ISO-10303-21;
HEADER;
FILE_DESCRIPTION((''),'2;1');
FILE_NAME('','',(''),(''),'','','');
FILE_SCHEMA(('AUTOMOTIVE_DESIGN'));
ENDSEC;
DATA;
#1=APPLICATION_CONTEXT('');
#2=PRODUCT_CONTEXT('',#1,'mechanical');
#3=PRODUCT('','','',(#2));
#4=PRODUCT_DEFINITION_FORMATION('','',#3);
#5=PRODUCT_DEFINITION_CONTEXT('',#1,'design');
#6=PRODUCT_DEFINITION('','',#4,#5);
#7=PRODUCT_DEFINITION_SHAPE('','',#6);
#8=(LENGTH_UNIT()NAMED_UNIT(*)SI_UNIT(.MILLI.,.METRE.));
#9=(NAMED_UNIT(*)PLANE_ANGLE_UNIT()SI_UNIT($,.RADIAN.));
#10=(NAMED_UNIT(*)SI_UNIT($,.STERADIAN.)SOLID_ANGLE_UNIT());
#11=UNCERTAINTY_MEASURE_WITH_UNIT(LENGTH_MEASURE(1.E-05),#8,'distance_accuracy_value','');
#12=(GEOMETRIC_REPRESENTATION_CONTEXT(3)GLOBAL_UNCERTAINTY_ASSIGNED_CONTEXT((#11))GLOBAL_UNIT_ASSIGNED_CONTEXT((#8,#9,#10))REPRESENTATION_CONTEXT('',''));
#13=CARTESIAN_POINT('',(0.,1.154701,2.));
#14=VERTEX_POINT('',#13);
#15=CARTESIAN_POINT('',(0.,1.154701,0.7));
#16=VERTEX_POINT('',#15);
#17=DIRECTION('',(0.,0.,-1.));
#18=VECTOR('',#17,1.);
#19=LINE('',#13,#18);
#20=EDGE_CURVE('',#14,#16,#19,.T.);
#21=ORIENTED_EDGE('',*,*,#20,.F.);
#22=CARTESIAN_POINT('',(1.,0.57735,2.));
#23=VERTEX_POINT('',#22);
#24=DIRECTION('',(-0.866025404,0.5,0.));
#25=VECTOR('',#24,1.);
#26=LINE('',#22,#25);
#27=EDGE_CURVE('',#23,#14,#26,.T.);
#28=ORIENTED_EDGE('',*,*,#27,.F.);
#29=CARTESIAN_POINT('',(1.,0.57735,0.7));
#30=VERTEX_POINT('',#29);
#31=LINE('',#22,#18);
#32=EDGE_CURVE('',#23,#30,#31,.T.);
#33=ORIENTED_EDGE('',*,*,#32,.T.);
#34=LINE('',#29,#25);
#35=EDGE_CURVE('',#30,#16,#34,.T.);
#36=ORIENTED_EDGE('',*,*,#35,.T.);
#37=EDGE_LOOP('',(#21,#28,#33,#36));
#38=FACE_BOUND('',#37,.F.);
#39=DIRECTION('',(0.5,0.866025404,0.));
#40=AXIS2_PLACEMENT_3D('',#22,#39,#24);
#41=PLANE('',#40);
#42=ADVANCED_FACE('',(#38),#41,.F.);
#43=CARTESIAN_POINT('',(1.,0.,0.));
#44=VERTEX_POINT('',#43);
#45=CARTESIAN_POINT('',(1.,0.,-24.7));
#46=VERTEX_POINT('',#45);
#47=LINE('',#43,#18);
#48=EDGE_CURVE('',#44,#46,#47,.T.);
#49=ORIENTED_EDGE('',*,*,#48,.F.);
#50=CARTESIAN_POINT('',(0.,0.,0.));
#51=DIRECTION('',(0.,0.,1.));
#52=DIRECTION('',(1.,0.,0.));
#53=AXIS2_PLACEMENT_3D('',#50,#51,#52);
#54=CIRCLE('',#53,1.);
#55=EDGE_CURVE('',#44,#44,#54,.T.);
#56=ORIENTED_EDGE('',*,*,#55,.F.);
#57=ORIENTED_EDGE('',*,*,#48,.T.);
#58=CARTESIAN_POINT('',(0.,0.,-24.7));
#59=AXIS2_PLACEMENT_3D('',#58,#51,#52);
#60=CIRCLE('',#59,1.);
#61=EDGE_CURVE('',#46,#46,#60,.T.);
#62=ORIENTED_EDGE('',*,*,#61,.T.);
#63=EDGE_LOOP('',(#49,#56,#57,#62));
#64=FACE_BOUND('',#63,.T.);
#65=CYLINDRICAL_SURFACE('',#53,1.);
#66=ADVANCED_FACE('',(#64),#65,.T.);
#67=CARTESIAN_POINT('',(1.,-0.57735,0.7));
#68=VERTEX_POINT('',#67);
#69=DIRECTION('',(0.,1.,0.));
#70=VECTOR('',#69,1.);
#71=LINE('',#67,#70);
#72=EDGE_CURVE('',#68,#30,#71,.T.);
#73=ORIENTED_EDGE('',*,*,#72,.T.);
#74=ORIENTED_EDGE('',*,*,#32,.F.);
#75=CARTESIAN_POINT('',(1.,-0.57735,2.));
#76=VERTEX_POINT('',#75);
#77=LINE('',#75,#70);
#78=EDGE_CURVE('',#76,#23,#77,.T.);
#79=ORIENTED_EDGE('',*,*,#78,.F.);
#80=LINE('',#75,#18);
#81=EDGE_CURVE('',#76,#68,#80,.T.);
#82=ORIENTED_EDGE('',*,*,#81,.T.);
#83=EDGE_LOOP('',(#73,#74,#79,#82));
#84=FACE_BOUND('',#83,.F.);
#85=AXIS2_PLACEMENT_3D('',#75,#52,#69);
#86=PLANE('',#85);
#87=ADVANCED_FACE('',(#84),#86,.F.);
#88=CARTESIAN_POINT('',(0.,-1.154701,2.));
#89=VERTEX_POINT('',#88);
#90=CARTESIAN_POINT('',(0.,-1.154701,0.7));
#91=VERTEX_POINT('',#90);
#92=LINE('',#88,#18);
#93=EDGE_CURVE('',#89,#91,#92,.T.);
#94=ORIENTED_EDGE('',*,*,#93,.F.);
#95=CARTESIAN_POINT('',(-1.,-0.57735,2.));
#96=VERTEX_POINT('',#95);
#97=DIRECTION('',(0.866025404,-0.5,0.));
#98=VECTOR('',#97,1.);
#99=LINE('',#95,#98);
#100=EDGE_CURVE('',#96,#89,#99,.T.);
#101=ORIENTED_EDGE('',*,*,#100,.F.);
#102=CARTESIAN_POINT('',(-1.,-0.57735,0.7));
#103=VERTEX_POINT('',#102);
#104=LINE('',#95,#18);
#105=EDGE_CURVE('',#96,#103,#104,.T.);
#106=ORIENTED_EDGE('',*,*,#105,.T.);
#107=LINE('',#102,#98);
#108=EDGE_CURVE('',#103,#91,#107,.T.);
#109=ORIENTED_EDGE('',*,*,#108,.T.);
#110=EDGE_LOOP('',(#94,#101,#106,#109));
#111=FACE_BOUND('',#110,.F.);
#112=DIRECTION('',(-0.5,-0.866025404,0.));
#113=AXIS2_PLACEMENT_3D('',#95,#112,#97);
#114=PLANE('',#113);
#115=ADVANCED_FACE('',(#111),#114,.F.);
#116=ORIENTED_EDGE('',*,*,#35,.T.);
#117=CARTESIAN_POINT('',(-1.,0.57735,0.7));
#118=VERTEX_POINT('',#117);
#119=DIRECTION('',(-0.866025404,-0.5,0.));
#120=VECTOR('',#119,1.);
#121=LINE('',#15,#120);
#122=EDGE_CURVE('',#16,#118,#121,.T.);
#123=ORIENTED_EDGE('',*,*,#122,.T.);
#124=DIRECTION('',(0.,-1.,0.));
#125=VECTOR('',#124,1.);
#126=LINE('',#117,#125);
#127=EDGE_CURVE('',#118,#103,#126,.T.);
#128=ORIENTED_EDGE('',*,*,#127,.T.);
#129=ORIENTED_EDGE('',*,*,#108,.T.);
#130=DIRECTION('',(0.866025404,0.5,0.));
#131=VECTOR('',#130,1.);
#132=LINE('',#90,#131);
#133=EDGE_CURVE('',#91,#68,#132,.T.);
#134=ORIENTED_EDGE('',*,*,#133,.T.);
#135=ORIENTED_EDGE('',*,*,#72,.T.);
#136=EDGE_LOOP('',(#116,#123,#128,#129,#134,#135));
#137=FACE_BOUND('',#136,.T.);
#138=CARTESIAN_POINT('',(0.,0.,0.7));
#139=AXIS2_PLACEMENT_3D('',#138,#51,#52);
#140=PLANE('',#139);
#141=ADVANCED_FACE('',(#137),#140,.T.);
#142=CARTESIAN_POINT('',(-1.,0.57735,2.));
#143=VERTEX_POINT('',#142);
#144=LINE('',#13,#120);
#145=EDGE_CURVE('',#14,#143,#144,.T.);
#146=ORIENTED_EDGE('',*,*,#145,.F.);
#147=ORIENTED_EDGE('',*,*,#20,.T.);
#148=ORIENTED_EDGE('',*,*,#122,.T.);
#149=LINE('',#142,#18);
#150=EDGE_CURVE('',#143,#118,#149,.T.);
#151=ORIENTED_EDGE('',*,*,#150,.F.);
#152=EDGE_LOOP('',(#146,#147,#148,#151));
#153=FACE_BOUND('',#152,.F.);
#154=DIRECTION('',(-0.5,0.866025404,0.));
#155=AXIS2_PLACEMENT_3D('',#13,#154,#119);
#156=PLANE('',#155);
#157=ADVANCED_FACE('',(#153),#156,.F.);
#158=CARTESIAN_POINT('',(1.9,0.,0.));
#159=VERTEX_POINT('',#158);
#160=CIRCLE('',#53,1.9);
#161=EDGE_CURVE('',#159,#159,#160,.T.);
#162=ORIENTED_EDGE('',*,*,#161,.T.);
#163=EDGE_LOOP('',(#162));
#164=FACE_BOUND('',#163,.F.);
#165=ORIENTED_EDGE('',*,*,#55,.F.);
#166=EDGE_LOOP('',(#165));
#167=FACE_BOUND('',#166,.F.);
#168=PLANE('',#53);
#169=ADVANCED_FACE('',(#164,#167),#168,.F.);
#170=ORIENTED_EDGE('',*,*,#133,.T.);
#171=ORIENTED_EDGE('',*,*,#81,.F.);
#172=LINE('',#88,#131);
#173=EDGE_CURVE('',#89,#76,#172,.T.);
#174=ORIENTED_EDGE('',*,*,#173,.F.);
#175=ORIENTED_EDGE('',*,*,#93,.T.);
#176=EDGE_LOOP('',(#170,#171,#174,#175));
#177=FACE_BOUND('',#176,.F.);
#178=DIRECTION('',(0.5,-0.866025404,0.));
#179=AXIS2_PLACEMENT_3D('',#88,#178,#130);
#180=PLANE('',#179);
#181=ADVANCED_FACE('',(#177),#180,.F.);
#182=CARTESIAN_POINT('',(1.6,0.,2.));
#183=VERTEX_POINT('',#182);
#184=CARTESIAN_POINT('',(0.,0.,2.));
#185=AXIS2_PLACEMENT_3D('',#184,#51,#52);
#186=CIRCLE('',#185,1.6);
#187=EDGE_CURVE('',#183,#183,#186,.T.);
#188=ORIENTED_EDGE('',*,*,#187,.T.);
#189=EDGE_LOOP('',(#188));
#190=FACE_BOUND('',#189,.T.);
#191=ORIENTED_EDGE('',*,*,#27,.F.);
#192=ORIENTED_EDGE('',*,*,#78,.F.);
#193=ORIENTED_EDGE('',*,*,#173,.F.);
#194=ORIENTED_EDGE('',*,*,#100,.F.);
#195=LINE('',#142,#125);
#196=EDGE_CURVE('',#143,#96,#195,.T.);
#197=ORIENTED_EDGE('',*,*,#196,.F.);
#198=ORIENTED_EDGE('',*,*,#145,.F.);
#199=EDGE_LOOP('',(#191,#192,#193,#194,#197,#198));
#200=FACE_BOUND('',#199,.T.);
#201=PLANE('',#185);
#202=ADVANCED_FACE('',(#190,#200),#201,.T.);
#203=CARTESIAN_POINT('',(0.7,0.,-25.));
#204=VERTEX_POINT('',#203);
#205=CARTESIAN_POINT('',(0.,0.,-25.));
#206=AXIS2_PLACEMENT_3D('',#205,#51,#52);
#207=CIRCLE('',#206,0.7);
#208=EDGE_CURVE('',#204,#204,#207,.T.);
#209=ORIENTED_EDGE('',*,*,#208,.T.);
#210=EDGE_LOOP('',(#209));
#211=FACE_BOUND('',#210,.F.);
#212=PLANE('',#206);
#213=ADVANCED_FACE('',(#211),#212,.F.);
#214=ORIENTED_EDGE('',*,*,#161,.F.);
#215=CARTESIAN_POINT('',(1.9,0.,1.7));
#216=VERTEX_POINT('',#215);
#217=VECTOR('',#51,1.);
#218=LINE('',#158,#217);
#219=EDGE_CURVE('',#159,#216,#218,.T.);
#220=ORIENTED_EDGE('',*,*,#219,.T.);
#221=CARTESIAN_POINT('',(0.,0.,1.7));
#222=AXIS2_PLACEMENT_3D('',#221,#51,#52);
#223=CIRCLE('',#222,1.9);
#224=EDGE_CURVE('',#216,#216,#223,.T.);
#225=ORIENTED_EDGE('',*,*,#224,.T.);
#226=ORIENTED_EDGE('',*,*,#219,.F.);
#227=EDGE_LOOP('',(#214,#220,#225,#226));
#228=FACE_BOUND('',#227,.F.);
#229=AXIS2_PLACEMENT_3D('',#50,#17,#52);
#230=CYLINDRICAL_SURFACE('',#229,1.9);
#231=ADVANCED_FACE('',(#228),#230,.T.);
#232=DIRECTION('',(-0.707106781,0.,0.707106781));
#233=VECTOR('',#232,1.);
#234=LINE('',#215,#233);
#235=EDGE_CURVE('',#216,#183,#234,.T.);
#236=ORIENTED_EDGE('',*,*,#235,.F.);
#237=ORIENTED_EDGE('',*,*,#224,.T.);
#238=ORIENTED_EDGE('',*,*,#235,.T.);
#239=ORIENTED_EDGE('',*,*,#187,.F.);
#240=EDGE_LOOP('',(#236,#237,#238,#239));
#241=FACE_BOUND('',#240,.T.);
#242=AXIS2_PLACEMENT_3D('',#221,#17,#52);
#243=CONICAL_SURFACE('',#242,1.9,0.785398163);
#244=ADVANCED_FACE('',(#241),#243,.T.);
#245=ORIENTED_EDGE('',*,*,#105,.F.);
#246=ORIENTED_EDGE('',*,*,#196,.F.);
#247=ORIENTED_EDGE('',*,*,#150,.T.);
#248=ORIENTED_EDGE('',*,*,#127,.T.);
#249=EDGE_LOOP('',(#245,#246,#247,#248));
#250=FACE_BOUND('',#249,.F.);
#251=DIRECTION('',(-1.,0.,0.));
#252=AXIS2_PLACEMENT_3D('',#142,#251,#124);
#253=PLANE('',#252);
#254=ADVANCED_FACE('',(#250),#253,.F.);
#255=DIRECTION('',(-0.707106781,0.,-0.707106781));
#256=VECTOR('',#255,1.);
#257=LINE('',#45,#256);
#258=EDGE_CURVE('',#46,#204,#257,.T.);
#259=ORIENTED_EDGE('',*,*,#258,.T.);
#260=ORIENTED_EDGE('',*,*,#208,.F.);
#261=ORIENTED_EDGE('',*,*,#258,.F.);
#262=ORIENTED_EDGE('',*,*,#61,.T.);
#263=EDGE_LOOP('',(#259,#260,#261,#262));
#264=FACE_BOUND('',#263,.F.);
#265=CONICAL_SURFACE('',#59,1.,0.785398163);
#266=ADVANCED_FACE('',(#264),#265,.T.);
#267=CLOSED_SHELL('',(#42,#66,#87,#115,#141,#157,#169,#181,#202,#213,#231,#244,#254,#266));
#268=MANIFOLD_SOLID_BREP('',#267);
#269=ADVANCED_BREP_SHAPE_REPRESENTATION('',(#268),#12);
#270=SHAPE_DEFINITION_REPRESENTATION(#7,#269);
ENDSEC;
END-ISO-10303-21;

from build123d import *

# Parameters (mm, degrees)
F2_R      = 1
F3_DEPTH  = 25
F2_R_2    = 1.9
F3_FACE_R = 1
F4_DEPTH  = 2
F5_SIZE   = 0.3
F7_DEPTH  = 1.3


with BuildPart() as f3:
    # F2 (on Top) → F3 (new body)
    with BuildSketch(Plane.XY):
        Circle(F2_R)
    extrude(amount=-F3_DEPTH)

    # F2 (on Top) + F3_face (on face) → F4 (join)
    with BuildSketch(Plane.XY):
        Circle(F2_R_2)
        Circle(F2_R, mode=Mode.SUBTRACT)
    with BuildSketch(Plane.XY):
        Circle(F3_FACE_R)
    extrude(amount=F4_DEPTH)

    # F5
    f5_edges = [f3.edges().sort_by_distance(p)[0] for p in [
        (-1, 0, -25),
        (-1.9, 0, 2),
    ]]
    chamfer(f5_edges, length=F5_SIZE)

    # F6 (on face) → F7 (cut)
    with BuildSketch(Plane.XY.offset(2)):
        Polygon((1, -0.5773502692), (1, 0.5773502692), (0, 1.1547005384), (-1, 0.5773502692), (-1, -0.5773502692), (0, -1.1547005384), align=None)
    extrude(amount=-F7_DEPTH, mode=Mode.SUBTRACT)


solid = f3.part
